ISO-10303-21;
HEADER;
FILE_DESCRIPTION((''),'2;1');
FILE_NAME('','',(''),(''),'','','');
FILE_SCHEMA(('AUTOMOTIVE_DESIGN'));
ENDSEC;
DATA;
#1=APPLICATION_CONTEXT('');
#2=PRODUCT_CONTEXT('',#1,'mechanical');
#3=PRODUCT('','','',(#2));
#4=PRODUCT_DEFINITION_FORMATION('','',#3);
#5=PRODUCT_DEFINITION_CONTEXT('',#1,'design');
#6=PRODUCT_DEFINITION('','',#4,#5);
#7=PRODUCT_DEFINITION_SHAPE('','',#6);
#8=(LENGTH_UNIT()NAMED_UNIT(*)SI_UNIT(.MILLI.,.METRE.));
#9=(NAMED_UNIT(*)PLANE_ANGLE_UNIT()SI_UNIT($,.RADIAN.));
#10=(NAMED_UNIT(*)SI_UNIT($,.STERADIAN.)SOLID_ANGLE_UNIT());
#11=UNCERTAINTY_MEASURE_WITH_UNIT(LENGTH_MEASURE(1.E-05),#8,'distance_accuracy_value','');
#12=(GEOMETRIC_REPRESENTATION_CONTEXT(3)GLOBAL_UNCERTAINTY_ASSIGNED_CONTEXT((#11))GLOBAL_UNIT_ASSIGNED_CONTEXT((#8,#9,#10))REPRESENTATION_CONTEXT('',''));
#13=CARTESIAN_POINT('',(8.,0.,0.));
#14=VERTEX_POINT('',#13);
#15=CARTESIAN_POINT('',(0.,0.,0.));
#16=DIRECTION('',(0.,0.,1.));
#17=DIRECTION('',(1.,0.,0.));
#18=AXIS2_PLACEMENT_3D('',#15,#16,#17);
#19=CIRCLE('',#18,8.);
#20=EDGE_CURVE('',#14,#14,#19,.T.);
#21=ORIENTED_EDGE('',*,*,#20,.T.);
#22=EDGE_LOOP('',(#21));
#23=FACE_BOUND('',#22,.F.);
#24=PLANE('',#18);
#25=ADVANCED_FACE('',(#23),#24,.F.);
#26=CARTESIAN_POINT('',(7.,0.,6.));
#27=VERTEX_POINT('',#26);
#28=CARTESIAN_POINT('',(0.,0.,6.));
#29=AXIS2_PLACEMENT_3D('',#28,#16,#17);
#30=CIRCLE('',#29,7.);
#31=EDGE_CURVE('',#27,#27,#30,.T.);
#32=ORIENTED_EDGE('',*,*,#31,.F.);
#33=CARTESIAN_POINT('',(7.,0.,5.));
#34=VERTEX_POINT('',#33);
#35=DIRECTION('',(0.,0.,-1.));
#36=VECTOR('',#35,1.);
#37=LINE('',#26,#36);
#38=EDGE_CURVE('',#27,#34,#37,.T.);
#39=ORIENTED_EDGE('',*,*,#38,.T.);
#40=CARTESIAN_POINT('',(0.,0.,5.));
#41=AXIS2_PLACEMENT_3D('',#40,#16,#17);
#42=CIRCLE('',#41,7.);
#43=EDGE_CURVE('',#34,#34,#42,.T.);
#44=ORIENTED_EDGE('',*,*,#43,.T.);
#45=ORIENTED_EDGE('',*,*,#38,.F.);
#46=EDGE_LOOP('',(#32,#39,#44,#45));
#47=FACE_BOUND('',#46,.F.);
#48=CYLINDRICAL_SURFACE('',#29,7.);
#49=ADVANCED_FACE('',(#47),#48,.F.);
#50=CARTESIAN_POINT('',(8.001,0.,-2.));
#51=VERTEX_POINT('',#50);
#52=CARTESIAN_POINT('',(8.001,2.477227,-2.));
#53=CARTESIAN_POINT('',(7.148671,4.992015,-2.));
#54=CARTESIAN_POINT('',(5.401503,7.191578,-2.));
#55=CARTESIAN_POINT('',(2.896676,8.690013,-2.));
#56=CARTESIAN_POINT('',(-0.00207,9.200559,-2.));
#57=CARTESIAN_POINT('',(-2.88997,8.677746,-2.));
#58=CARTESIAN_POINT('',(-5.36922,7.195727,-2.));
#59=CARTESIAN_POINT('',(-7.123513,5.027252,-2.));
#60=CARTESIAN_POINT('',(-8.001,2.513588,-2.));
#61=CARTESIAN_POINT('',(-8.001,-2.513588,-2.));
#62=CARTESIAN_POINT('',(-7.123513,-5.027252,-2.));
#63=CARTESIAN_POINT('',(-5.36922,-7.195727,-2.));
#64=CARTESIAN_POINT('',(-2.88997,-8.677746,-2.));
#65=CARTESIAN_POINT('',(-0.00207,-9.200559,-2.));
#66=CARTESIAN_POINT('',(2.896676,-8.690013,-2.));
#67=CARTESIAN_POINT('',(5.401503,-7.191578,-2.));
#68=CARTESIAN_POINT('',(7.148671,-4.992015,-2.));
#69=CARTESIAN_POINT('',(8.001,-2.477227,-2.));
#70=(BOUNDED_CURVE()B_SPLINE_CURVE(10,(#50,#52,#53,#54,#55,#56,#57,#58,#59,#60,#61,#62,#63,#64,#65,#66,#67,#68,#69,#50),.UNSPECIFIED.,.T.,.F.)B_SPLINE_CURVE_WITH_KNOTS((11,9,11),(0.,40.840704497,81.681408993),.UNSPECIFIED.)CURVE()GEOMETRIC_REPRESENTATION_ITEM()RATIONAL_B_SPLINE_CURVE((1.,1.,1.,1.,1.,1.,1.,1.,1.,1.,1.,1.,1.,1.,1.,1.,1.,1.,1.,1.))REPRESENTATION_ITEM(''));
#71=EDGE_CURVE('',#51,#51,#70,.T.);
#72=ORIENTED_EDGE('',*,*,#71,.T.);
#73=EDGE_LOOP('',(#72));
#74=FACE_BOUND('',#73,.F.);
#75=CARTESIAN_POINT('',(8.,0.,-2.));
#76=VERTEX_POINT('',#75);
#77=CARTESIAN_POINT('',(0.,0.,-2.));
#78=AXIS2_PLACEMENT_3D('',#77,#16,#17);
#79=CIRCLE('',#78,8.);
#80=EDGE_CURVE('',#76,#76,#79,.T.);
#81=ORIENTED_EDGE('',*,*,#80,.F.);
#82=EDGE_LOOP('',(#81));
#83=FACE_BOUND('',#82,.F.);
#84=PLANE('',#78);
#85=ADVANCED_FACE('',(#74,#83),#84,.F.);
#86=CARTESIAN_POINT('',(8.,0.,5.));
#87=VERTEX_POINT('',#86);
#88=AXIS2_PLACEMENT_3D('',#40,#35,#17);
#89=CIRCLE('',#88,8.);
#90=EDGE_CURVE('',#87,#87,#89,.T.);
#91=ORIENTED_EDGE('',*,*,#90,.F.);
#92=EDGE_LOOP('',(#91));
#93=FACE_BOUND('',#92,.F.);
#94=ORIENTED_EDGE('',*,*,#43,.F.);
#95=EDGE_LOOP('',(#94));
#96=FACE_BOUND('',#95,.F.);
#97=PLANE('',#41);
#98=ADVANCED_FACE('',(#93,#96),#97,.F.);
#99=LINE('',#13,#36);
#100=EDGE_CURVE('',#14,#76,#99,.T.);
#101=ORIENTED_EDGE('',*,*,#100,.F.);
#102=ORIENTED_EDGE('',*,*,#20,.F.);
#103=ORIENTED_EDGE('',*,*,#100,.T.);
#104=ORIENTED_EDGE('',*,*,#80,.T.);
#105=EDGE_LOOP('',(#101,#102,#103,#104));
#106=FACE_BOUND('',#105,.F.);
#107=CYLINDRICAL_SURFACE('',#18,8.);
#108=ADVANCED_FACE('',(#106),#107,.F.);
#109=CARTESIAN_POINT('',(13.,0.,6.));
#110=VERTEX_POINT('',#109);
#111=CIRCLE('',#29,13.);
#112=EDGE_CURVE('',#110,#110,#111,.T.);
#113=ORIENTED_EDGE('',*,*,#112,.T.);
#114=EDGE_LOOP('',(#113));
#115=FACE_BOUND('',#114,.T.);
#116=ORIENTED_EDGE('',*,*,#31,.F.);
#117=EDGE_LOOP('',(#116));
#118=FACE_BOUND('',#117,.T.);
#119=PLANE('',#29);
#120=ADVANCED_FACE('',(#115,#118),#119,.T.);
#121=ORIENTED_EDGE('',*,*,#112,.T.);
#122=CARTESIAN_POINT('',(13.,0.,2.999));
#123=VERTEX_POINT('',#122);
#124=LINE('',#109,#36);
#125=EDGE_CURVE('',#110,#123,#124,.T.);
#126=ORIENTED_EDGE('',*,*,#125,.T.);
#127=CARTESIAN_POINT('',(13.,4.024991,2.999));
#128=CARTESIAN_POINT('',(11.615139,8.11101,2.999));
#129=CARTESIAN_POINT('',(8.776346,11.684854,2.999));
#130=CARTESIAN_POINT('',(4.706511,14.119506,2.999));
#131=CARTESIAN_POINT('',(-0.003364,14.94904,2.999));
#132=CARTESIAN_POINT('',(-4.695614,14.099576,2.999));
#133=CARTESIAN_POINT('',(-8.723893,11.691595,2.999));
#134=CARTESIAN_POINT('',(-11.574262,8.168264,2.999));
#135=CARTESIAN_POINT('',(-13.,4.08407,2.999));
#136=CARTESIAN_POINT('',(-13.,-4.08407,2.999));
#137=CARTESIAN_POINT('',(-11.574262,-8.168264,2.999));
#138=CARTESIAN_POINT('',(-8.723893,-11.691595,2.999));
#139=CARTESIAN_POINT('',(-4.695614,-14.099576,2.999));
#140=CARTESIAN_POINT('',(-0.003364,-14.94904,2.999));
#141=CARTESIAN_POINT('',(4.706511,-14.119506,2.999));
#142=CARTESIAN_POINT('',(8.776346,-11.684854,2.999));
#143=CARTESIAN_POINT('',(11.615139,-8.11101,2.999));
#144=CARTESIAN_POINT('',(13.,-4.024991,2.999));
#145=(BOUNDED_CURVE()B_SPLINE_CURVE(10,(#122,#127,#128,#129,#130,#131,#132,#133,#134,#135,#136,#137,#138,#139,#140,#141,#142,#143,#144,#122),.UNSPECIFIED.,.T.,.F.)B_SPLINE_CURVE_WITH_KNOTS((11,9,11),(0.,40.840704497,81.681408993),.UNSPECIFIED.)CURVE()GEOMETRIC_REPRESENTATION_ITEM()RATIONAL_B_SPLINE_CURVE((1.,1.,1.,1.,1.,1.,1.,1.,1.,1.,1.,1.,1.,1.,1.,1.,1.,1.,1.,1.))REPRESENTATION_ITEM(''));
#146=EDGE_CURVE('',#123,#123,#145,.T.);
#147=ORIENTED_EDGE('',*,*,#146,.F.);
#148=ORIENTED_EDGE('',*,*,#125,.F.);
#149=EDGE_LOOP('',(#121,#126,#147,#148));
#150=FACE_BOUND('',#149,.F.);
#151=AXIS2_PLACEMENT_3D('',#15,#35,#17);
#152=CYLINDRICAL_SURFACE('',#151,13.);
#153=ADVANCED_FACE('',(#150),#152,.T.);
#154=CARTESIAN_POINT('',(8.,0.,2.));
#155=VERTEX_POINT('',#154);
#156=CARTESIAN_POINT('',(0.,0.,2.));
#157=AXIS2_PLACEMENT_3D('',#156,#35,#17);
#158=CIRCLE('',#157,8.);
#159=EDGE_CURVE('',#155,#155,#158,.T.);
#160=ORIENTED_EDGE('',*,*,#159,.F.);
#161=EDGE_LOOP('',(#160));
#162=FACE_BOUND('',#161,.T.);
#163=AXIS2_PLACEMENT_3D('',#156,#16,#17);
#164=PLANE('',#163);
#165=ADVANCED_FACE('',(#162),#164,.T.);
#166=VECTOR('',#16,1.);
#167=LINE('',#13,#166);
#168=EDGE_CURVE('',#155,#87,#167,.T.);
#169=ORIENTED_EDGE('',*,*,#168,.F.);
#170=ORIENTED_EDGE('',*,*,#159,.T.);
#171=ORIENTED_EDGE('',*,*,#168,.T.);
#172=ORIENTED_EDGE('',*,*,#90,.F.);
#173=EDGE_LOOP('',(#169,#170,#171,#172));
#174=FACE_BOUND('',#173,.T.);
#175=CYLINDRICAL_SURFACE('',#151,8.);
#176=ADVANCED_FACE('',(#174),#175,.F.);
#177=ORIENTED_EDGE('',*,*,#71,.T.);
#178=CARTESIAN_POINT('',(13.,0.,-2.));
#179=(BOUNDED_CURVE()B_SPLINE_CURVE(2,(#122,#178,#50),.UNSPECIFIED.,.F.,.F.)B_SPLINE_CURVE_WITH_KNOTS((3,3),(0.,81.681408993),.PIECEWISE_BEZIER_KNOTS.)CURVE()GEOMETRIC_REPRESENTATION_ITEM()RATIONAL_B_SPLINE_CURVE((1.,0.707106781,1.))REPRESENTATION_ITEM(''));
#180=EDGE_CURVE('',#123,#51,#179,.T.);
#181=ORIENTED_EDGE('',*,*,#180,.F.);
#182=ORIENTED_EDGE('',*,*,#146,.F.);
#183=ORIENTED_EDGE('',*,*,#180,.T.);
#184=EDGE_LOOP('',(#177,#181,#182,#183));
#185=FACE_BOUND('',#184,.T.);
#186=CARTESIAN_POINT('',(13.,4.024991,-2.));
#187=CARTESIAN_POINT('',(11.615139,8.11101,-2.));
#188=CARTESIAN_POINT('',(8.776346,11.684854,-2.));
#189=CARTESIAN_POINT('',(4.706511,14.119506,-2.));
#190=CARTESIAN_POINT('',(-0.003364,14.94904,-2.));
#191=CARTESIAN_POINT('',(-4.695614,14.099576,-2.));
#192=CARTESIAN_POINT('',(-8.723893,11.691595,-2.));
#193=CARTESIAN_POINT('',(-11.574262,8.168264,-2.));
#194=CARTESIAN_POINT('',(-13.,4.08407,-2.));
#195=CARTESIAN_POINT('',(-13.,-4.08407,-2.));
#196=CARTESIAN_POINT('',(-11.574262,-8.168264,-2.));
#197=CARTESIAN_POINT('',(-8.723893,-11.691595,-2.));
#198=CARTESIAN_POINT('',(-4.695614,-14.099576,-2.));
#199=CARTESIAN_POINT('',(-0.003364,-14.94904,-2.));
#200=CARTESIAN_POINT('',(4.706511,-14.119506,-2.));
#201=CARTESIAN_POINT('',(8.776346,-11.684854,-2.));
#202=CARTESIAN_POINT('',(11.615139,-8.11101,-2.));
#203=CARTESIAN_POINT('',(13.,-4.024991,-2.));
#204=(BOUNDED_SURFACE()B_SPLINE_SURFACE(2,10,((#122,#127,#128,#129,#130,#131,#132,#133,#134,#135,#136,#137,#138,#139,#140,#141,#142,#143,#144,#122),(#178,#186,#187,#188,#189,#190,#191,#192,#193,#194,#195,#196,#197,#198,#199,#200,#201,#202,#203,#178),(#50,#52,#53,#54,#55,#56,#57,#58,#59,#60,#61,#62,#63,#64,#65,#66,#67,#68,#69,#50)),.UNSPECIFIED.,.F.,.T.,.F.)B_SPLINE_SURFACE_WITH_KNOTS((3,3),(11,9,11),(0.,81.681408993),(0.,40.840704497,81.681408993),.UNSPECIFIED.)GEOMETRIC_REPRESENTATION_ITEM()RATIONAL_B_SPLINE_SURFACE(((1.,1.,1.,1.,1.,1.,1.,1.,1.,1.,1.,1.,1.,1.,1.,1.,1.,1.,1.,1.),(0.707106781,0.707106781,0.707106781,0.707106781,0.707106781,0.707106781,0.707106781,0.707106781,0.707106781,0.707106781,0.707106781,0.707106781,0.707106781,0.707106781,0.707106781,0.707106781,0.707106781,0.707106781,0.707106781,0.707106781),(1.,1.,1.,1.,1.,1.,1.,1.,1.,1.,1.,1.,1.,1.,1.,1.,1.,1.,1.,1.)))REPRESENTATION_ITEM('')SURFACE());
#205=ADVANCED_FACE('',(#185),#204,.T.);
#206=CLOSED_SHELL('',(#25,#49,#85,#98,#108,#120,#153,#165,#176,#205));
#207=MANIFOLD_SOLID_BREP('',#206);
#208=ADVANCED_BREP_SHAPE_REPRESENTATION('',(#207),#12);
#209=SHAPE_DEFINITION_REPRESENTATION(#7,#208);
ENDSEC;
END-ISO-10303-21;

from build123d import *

# Parameters (mm, degrees)
F0_R        = 13
F0_R_2      = 1.2126826201
F0_R_3      = 8
F0_R_4      = 7
F1_DEPTH    = 2
F2_DEPTH    = 6
F4_R        = 13
F4_R_2      = 8
F4_R_3      = 7
F5_DEPTH    = 1
F2_FACE_R   = 13
F2_FACE_R_2 = 1.2126826201
F6_DEPTH    = 1
F7_DEPTH    = 2
F8_R        = 4.999


# Not quite as in the source:
# - a fillet or chamfer is up to 0.001 mm smaller than in the source, because OpenCascade refuses the exact size


with BuildPart() as f1:
    # F0 (on Top) → F1 (new body)
    with BuildSketch(Plane.XY):
        Circle(F0_R)
        with Locations((0, -10.5861881748)):
            Circle(F0_R_2, mode=Mode.SUBTRACT)
        Circle(F0_R_3, mode=Mode.SUBTRACT)
        Circle(F0_R_3)
        Circle(F0_R_4, mode=Mode.SUBTRACT)
        Circle(F0_R_4)
    extrude(amount=F1_DEPTH)

    # F0 (on Top) → F2 (join)
    with BuildSketch(Plane.XY):
        Circle(F0_R)
        with Locations((0, -10.5861881748)):
            Circle(F0_R_2, mode=Mode.SUBTRACT)
        Circle(F0_R_3, mode=Mode.SUBTRACT)
    extrude(amount=F2_DEPTH)

    # F4 (on offset) → F5 (join)
    with BuildSketch(Plane.XY.offset(6)):
        Circle(F4_R)
        Circle(F4_R_2, mode=Mode.SUBTRACT)
        Circle(F4_R_2)
        Circle(F4_R_3, mode=Mode.SUBTRACT)
    extrude(amount=-F5_DEPTH)

    # F2_face (on face) + F0 (on Top) → F6 (join)
    with BuildSketch(Plane(origin=(0, 0.0929272063, 0), x_dir=(1, 0, 0), z_dir=(0, 0, -1))):
        with Locations((0, 0.0929272063)):
            Circle(F2_FACE_R)
        with Locations((0, 10.6791153811)):
            Circle(F2_FACE_R_2, mode=Mode.SUBTRACT)
    with BuildSketch(Plane.XY):
        Circle(F0_R_4)
    extrude(amount=-F6_DEPTH, dir=(0, 0, -1))

    # F0 (on Top) → F7 (join)
    with BuildSketch(Plane.XY):
        Circle(F0_R)
        with Locations((0, -10.5861881748)):
            Circle(F0_R_2, mode=Mode.SUBTRACT)
        Circle(F0_R_3, mode=Mode.SUBTRACT)
    extrude(amount=-F7_DEPTH)

    # F8 (radius 5 in the source; OpenCascade refuses exactly that, so slightly less here)
    f8_edges = [f1.edges().sort_by_distance(p)[0] for p in [
        (-13, 0, -2),
    ]]
    fillet(f8_edges, radius=F8_R)


solid = f1.part
